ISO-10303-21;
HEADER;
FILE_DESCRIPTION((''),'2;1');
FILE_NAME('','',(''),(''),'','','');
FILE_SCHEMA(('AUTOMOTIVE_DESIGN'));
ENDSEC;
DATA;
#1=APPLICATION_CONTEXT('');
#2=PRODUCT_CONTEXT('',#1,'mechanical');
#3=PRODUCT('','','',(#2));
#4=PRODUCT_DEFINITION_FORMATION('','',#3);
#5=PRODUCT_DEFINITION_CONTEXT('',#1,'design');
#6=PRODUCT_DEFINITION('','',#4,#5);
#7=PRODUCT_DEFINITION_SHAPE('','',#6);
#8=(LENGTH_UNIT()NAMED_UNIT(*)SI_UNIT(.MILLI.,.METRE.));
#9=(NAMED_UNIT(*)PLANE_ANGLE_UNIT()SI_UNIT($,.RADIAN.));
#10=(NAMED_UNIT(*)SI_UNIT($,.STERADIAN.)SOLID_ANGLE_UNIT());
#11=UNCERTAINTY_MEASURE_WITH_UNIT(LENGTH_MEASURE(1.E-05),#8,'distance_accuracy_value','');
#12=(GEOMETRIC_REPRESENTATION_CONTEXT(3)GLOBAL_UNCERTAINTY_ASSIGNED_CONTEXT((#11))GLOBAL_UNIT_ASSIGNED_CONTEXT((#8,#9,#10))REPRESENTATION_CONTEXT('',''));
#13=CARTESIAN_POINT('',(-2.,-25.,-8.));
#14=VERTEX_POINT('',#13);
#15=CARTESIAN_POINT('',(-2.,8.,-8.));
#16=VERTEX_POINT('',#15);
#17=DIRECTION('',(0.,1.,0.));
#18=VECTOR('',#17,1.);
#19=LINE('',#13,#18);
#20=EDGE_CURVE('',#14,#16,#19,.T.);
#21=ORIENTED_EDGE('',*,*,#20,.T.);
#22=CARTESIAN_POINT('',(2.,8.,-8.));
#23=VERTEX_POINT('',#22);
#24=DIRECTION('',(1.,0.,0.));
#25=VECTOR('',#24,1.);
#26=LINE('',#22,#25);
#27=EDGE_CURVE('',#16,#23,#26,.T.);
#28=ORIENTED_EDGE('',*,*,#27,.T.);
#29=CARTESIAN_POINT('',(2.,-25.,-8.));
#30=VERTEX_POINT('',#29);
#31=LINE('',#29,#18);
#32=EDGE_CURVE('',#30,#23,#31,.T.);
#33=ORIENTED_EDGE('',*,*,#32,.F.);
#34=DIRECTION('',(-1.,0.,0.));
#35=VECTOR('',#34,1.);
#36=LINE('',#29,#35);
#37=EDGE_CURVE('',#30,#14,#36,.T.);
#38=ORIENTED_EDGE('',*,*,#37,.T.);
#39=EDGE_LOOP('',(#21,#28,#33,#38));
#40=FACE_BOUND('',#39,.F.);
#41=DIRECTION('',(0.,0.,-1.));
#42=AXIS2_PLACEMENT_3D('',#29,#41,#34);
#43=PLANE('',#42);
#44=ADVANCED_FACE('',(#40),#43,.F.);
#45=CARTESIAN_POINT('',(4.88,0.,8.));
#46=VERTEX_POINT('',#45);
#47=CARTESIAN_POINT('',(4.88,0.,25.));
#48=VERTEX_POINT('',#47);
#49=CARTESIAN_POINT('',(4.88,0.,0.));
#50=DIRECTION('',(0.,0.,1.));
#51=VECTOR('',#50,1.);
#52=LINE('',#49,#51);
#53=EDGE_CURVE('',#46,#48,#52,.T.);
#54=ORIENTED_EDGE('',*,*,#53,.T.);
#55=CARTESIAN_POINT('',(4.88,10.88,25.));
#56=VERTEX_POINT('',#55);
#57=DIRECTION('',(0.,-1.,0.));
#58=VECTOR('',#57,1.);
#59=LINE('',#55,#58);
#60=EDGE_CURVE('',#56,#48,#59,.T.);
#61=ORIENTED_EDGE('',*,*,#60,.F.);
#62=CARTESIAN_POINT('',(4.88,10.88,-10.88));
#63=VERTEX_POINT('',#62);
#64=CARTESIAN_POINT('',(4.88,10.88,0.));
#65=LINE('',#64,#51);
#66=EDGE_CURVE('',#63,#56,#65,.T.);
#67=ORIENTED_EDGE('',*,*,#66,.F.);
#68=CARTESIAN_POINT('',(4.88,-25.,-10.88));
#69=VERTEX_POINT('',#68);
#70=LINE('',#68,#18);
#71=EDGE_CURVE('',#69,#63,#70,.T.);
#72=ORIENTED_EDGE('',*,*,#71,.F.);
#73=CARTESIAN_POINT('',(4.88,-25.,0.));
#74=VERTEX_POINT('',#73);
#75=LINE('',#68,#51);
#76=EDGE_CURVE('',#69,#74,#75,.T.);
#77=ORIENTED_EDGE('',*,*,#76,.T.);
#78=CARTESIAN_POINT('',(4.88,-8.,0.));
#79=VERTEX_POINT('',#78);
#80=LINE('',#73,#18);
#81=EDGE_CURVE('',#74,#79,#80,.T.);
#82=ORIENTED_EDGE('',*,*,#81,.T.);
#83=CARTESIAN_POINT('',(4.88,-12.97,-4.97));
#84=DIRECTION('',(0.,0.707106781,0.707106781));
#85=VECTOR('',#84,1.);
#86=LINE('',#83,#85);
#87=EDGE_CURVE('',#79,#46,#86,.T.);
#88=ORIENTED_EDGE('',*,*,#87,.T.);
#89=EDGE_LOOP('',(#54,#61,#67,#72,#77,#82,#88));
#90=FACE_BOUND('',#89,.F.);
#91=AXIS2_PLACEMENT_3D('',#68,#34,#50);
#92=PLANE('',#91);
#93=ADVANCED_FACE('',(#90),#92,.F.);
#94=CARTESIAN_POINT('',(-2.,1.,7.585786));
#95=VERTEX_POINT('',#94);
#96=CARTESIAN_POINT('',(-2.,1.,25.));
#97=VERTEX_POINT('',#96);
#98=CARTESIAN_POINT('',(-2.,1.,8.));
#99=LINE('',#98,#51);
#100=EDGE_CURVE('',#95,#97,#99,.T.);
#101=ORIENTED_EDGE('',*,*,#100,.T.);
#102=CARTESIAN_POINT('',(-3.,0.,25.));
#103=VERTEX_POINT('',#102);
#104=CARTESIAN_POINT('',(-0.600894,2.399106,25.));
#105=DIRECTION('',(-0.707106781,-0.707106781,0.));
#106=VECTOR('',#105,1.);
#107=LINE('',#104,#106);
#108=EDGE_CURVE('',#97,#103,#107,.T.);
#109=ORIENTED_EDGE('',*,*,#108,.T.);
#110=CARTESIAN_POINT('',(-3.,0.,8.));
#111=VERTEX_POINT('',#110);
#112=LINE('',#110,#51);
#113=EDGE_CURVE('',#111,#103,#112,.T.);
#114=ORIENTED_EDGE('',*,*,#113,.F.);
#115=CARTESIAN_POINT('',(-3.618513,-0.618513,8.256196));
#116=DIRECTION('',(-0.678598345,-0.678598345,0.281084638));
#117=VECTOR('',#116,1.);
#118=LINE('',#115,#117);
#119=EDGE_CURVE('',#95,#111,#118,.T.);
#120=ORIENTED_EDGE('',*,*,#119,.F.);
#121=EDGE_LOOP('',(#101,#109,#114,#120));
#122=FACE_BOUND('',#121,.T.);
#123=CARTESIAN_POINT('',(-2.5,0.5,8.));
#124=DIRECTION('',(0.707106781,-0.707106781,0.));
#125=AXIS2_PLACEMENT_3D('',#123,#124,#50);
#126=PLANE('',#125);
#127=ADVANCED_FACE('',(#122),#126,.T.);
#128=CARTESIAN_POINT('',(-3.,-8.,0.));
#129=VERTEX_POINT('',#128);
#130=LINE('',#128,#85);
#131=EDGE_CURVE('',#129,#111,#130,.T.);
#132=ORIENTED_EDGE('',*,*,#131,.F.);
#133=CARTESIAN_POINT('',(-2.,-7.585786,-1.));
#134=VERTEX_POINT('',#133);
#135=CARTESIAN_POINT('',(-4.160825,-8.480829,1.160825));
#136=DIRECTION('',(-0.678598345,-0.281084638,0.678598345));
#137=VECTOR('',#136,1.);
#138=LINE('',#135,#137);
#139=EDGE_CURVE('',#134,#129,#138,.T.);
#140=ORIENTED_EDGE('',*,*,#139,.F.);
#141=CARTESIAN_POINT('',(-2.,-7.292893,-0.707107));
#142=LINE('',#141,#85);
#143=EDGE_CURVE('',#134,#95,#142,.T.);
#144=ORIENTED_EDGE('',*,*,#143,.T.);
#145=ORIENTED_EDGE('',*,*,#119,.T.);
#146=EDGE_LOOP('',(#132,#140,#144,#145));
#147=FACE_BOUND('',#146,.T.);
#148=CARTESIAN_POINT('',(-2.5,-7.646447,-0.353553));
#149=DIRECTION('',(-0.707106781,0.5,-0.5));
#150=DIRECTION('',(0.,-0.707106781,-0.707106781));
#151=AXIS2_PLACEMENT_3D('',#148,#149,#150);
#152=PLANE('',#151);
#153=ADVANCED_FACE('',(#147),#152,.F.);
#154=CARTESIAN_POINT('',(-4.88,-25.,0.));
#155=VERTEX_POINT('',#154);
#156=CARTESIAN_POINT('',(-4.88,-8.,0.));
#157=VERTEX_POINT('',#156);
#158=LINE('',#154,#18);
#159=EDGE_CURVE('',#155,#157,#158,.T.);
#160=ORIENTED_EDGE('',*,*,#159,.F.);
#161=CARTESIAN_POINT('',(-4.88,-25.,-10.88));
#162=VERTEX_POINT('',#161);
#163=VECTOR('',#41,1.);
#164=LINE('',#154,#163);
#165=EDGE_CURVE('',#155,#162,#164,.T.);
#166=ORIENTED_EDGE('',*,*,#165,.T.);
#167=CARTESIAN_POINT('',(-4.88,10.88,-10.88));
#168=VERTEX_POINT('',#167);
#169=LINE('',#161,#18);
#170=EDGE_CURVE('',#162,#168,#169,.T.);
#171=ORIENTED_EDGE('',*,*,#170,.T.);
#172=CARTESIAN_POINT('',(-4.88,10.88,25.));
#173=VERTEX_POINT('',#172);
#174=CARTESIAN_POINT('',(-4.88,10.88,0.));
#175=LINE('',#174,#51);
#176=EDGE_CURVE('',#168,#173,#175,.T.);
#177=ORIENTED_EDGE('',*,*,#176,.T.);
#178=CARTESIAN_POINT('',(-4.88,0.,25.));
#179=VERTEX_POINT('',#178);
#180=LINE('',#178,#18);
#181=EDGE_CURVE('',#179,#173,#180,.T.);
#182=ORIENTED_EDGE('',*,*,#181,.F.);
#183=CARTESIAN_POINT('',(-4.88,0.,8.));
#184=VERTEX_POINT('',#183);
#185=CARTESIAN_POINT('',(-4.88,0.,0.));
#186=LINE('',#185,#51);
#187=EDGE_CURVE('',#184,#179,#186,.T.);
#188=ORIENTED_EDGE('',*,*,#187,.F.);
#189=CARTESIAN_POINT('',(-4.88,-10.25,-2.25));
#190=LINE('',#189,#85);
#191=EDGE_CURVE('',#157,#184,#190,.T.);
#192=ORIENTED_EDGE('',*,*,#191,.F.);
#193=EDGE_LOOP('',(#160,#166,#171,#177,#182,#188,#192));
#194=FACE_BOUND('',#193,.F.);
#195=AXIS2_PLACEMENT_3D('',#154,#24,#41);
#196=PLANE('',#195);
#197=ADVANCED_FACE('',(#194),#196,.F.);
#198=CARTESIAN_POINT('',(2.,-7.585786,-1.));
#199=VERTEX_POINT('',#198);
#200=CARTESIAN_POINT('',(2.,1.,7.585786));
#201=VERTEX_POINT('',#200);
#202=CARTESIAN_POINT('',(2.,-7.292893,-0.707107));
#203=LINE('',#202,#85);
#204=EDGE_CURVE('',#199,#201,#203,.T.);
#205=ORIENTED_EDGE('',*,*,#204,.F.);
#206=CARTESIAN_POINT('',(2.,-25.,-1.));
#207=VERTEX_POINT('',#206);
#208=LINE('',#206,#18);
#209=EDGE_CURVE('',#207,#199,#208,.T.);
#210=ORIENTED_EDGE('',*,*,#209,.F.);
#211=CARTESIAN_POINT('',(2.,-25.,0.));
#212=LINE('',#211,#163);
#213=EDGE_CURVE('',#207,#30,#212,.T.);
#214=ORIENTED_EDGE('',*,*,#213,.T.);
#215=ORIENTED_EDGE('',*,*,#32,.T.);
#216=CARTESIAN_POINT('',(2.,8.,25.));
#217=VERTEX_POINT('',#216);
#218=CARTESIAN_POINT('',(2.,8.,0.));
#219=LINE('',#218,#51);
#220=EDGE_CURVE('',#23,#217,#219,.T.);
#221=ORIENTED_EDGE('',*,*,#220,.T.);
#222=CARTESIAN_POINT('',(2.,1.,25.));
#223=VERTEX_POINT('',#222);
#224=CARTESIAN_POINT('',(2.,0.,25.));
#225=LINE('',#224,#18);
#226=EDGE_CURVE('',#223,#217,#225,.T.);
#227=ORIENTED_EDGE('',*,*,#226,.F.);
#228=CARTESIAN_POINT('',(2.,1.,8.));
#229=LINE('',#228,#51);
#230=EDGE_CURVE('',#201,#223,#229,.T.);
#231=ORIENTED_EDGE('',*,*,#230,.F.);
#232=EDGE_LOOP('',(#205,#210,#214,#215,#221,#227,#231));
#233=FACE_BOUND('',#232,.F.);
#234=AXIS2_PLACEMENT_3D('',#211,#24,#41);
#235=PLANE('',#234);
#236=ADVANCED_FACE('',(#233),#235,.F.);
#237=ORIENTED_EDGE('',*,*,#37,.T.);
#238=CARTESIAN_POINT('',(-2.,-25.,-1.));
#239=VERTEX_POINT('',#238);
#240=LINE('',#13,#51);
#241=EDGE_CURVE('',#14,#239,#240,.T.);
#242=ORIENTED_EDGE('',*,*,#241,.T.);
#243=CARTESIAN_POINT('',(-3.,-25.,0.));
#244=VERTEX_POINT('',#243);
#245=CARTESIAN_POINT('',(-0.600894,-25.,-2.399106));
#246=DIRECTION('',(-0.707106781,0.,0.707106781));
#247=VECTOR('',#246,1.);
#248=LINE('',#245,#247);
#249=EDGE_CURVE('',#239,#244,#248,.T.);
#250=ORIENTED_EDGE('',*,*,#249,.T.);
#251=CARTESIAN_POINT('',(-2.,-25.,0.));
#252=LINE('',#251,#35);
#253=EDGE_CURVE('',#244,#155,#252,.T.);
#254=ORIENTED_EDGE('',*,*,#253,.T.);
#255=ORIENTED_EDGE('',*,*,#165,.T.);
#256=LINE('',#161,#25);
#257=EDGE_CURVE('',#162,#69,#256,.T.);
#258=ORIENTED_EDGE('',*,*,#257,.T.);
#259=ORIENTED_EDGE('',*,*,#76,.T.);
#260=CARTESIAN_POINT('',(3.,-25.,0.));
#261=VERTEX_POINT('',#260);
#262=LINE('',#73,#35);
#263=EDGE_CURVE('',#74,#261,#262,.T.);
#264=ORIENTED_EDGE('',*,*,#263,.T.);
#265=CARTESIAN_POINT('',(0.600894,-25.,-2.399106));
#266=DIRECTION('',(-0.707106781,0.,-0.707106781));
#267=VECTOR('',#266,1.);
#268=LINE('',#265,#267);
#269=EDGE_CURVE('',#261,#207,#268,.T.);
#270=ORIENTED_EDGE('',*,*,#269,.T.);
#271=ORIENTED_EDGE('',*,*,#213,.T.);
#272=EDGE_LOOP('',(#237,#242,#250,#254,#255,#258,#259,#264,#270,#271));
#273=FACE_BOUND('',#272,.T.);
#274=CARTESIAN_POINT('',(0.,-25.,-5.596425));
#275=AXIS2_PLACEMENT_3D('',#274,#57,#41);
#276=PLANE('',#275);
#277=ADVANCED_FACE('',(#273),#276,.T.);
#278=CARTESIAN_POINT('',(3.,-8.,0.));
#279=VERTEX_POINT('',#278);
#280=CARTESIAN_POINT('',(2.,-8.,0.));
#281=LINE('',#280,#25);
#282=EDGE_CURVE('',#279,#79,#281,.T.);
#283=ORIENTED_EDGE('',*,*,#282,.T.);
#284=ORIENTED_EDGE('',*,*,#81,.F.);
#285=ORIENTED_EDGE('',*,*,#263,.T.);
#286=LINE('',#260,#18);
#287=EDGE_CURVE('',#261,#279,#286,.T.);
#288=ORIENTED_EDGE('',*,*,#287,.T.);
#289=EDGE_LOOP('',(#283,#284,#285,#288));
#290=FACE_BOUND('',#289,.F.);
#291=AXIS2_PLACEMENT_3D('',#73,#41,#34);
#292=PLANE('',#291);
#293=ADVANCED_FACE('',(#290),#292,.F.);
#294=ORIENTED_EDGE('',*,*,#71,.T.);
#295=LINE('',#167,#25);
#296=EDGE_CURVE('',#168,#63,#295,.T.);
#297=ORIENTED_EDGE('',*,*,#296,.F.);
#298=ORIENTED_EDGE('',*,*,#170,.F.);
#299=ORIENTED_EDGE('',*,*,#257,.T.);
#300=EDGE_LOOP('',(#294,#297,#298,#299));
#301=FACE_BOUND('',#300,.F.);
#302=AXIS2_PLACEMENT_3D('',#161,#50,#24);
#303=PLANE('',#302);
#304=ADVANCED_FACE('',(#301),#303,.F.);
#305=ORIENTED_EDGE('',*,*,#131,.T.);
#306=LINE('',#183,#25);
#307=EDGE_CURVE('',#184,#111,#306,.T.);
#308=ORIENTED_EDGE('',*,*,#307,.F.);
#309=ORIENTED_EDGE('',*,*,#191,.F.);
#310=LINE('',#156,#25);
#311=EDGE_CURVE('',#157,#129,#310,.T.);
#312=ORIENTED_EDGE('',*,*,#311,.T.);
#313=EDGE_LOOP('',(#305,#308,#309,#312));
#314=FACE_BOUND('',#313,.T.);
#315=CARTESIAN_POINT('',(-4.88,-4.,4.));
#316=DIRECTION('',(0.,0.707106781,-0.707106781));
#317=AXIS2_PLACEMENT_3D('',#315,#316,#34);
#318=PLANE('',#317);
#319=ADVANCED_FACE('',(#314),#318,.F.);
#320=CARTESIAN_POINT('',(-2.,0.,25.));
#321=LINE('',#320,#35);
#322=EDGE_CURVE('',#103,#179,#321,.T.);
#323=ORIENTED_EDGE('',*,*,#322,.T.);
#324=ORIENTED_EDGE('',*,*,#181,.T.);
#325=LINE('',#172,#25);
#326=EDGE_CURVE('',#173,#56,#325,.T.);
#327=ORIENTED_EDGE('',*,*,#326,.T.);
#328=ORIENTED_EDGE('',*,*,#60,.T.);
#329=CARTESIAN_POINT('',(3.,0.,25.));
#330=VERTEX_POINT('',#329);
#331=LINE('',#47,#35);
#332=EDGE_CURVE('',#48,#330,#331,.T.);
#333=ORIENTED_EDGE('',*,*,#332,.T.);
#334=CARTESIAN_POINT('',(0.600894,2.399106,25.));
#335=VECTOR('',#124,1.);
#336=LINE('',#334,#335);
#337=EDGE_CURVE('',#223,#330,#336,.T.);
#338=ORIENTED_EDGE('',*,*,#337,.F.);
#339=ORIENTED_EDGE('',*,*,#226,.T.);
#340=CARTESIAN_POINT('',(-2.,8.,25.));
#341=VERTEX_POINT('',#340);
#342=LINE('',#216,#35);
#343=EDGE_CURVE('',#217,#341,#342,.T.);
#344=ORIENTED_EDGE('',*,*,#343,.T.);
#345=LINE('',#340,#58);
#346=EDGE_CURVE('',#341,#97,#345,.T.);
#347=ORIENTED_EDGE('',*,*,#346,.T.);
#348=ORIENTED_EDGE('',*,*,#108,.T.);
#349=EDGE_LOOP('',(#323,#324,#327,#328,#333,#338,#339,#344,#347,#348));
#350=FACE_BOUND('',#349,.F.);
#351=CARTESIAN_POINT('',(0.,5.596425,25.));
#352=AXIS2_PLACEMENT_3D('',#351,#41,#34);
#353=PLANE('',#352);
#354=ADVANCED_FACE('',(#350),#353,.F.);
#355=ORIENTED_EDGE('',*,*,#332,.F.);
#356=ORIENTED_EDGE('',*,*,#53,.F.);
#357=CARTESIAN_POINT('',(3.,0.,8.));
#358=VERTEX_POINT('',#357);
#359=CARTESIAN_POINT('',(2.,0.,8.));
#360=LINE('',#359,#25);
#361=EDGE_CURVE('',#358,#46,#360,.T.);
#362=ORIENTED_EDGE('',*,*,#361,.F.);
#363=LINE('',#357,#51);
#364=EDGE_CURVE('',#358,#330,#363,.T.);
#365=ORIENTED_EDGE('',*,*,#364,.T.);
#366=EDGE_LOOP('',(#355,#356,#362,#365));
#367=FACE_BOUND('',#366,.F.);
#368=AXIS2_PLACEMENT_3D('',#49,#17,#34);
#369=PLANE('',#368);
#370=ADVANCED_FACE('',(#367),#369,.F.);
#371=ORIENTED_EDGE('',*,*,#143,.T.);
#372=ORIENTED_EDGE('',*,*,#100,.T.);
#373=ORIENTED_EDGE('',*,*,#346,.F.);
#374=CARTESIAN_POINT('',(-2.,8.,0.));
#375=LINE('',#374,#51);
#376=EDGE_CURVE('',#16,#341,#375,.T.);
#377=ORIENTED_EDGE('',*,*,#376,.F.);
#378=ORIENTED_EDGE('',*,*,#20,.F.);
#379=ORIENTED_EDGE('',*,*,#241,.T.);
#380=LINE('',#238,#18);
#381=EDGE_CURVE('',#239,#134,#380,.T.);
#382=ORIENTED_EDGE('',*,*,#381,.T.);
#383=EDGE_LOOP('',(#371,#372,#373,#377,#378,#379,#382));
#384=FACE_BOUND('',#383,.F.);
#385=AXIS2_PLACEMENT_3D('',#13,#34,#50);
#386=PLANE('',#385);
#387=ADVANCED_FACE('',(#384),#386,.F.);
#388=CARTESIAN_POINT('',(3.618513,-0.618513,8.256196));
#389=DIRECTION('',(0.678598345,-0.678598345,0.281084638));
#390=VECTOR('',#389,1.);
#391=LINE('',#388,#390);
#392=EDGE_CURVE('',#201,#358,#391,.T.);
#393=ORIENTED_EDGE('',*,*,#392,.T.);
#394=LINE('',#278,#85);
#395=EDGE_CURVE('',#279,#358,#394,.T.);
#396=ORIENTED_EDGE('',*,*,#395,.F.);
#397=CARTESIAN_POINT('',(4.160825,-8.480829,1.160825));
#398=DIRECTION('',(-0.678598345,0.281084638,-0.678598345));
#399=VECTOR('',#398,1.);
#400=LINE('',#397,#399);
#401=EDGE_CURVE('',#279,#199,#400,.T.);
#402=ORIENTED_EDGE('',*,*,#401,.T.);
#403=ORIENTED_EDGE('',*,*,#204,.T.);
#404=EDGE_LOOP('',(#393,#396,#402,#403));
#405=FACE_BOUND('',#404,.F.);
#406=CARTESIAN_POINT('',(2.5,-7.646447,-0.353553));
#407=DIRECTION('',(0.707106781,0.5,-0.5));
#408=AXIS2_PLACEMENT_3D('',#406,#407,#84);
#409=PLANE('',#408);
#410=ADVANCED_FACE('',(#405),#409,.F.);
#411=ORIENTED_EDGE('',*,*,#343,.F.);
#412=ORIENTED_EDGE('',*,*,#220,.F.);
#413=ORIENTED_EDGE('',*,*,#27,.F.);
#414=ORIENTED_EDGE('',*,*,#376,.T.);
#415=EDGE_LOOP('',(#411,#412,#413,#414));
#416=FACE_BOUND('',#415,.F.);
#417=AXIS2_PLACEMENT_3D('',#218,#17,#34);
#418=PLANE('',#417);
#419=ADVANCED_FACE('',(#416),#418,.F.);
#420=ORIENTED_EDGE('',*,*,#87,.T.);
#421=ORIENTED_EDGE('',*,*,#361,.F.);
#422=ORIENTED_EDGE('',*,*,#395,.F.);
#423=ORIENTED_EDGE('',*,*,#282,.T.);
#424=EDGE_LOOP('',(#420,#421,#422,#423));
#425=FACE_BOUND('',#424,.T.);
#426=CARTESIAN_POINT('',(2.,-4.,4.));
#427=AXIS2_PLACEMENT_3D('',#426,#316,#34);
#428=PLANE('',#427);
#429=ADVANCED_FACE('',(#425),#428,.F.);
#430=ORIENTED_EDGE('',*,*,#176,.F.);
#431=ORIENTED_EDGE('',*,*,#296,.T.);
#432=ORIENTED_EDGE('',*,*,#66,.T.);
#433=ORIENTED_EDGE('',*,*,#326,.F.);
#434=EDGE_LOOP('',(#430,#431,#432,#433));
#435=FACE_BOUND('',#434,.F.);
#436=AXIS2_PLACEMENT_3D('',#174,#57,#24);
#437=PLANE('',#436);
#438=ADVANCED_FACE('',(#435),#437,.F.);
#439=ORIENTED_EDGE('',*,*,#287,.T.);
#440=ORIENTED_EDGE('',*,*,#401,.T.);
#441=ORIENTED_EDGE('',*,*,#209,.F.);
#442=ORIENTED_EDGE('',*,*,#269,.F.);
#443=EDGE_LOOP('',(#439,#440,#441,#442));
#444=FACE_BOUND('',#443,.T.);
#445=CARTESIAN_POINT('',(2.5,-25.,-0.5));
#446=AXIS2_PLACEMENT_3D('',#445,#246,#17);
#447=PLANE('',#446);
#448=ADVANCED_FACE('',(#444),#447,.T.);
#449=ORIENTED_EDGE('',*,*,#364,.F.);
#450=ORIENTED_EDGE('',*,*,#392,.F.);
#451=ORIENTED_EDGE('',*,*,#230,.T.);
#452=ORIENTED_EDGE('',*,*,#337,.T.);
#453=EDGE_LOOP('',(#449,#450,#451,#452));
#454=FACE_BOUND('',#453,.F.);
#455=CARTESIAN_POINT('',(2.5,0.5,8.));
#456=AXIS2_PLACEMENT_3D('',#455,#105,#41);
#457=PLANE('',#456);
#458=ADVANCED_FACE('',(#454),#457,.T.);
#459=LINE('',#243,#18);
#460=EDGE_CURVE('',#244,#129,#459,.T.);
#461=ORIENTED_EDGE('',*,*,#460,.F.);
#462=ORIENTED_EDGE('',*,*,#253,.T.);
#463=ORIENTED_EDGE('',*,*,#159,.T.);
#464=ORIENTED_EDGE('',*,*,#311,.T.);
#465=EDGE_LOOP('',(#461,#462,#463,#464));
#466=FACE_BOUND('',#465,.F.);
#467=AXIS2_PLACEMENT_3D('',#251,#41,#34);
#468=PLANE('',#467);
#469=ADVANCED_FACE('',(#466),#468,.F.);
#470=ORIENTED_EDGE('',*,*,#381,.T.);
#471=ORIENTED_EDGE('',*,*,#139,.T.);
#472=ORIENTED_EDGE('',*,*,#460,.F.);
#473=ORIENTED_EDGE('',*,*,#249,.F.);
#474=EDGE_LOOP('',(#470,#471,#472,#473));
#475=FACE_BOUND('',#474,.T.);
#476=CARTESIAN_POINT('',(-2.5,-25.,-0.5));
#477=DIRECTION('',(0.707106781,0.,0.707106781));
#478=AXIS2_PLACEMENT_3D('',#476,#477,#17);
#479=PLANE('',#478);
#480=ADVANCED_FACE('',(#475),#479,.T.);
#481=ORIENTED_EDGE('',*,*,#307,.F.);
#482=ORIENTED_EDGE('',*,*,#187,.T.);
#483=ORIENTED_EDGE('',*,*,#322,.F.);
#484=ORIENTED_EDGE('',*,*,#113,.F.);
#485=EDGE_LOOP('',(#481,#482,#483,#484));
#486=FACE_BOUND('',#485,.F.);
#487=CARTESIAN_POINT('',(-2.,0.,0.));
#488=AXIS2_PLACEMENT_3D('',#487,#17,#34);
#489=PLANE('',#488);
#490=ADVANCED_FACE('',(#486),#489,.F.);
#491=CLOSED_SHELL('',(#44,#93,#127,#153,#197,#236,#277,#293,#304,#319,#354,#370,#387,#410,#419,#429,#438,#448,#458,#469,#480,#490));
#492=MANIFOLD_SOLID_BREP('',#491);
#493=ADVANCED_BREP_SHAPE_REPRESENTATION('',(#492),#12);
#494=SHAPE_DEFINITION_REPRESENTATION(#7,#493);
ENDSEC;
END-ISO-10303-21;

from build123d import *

# Parameters (mm, degrees)
F3_SIZE = 8
F4_SIZE = 1


with BuildPart() as f2:
    # F2: sweep along a path in F0
    with BuildLine(Plane.YZ) as f2_path:
        Line((-25, 0), (0, 0))
        Line((0, 0), (0, 25))
    # F1 (on Front) → F2 (sweep)
    with BuildSketch(Plane.XZ):
        Polygon((-2, -8), (-2, 0), (-4.88, 0), (-4.88, -10.88), (4.88, -10.88), (4.88, 0), (2, 0), (2, -8), align=None)
    sweep(path=f2_path.line, transition=Transition.RIGHT)

    # F3
    f3_edges = [f2.edges().sort_by_distance(p)[0] for p in [
        (-3.44, 0, 0),
        (3.44, 0, 0),
    ]]
    chamfer(f3_edges, length=F3_SIZE)

    # F4
    f4_edges = [f2.edges().sort_by_distance(p)[0] for p in [
        (-2, -16.5, 0),
        (-2, 0, 16.5),
        (2, 0, 16.5),
        (2, -16.5, 0),
        (-2, -4, 4),
        (2, -4, 4),
    ]]
    chamfer(f4_edges, length=F4_SIZE)


solid = f2.part
